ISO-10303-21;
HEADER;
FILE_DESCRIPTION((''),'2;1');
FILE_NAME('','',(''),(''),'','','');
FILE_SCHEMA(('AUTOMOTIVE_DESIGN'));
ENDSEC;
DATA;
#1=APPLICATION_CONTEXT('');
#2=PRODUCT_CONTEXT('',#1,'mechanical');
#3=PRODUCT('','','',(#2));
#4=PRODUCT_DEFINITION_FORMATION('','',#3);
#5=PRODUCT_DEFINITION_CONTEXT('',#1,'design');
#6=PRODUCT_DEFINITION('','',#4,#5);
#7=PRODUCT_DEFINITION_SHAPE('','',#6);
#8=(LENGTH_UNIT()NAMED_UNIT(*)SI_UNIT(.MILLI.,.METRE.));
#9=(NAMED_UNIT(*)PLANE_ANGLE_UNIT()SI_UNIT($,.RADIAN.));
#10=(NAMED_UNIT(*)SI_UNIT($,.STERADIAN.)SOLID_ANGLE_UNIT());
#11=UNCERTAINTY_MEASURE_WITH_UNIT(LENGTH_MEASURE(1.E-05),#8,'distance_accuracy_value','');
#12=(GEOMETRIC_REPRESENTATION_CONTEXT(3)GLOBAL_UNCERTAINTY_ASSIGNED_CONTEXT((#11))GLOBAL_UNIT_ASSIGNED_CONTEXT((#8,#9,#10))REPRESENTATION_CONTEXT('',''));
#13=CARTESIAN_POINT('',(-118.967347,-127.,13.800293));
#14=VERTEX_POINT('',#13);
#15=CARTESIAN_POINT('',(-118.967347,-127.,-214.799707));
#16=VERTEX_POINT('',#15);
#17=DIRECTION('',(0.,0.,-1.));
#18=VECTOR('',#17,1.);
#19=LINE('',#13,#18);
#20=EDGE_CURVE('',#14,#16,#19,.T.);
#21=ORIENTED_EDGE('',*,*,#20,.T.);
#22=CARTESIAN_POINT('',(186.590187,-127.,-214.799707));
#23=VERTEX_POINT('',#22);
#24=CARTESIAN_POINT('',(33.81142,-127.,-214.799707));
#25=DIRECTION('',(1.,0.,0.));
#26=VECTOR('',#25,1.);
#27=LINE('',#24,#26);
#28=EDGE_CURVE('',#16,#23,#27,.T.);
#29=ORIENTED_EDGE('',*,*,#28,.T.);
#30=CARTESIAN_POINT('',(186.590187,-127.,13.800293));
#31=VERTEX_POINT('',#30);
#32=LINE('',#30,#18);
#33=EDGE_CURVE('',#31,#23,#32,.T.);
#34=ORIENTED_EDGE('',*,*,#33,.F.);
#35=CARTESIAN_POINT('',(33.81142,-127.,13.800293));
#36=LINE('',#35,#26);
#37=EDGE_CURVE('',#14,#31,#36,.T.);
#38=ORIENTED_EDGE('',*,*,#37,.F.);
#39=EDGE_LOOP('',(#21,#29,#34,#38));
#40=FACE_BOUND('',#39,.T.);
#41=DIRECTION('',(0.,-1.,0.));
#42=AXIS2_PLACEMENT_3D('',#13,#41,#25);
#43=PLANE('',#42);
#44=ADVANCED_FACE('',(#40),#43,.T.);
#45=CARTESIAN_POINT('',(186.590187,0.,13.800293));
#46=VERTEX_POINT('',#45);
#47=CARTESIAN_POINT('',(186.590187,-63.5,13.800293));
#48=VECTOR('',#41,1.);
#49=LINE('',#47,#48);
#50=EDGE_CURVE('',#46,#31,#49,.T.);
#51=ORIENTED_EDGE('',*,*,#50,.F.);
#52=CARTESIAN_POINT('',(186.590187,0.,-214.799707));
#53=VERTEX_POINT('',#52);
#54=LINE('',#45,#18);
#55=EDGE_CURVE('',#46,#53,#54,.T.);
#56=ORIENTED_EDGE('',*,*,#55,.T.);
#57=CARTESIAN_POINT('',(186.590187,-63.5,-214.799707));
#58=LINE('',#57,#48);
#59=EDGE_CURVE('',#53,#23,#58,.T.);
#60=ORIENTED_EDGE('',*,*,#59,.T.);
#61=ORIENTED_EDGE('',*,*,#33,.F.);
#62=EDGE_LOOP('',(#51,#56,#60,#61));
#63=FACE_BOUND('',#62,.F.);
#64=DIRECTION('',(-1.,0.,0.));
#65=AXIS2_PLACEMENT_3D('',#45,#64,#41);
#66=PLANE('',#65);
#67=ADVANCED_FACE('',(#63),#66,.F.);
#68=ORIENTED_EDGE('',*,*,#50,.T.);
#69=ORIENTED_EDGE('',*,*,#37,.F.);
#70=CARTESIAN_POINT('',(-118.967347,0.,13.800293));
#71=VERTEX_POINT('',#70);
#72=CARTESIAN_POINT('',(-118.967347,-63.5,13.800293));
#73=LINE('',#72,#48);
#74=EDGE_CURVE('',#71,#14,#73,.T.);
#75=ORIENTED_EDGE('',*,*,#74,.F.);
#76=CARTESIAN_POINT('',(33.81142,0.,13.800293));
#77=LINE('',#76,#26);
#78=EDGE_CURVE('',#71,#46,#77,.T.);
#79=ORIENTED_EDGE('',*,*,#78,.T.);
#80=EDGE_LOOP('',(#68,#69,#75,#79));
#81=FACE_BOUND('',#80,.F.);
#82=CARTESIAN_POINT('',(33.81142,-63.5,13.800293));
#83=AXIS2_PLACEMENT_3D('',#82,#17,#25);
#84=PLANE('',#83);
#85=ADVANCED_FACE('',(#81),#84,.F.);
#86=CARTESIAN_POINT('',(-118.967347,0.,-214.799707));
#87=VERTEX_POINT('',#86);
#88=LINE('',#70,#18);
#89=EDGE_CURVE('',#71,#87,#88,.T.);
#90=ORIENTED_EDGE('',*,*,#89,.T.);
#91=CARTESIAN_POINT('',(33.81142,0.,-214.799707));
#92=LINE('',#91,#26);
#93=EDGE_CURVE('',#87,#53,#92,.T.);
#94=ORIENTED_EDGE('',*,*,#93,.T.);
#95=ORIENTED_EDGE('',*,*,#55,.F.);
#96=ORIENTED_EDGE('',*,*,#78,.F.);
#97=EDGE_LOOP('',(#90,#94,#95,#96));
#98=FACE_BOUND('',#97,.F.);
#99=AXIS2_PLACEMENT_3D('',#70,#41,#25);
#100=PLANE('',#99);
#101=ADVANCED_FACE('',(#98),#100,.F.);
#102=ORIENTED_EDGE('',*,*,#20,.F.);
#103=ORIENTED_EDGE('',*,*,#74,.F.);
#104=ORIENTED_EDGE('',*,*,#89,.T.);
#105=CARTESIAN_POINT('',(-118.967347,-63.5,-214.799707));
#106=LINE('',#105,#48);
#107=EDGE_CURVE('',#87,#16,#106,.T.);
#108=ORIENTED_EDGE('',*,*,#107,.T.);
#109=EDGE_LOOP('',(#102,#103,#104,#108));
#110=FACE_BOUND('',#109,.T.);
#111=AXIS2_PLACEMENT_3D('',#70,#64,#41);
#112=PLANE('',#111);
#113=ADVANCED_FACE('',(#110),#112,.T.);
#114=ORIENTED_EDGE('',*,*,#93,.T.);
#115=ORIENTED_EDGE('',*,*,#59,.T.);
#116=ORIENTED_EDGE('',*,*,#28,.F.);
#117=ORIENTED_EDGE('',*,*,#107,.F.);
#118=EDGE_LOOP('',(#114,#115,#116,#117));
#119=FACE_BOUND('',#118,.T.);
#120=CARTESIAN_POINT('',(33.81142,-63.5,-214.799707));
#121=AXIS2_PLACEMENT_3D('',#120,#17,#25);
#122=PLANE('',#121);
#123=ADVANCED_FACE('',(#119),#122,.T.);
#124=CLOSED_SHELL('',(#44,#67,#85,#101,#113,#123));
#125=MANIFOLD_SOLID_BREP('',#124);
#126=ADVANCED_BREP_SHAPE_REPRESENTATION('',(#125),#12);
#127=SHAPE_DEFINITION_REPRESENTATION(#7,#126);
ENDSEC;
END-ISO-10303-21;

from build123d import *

# Parameters (mm, degrees)
F1_E0_BOTTOM_W = 305.5575340986
F1_E0_BOTTOM_H = 127
F2_DEPTH       = 228.6


with BuildPart() as f2:
    # F1_E0_bottom (on explicit) → F2 (new body)
    with BuildSketch(Plane(origin=(-118.9673468471, 0, 13.8002932072), x_dir=(1, 0, 0), z_dir=(0, 0, -1))):
        with Locations((152.7787670493, 63.5)):
            Rectangle(F1_E0_BOTTOM_W, F1_E0_BOTTOM_H)
    extrude(amount=F2_DEPTH)


solid = f2.part
